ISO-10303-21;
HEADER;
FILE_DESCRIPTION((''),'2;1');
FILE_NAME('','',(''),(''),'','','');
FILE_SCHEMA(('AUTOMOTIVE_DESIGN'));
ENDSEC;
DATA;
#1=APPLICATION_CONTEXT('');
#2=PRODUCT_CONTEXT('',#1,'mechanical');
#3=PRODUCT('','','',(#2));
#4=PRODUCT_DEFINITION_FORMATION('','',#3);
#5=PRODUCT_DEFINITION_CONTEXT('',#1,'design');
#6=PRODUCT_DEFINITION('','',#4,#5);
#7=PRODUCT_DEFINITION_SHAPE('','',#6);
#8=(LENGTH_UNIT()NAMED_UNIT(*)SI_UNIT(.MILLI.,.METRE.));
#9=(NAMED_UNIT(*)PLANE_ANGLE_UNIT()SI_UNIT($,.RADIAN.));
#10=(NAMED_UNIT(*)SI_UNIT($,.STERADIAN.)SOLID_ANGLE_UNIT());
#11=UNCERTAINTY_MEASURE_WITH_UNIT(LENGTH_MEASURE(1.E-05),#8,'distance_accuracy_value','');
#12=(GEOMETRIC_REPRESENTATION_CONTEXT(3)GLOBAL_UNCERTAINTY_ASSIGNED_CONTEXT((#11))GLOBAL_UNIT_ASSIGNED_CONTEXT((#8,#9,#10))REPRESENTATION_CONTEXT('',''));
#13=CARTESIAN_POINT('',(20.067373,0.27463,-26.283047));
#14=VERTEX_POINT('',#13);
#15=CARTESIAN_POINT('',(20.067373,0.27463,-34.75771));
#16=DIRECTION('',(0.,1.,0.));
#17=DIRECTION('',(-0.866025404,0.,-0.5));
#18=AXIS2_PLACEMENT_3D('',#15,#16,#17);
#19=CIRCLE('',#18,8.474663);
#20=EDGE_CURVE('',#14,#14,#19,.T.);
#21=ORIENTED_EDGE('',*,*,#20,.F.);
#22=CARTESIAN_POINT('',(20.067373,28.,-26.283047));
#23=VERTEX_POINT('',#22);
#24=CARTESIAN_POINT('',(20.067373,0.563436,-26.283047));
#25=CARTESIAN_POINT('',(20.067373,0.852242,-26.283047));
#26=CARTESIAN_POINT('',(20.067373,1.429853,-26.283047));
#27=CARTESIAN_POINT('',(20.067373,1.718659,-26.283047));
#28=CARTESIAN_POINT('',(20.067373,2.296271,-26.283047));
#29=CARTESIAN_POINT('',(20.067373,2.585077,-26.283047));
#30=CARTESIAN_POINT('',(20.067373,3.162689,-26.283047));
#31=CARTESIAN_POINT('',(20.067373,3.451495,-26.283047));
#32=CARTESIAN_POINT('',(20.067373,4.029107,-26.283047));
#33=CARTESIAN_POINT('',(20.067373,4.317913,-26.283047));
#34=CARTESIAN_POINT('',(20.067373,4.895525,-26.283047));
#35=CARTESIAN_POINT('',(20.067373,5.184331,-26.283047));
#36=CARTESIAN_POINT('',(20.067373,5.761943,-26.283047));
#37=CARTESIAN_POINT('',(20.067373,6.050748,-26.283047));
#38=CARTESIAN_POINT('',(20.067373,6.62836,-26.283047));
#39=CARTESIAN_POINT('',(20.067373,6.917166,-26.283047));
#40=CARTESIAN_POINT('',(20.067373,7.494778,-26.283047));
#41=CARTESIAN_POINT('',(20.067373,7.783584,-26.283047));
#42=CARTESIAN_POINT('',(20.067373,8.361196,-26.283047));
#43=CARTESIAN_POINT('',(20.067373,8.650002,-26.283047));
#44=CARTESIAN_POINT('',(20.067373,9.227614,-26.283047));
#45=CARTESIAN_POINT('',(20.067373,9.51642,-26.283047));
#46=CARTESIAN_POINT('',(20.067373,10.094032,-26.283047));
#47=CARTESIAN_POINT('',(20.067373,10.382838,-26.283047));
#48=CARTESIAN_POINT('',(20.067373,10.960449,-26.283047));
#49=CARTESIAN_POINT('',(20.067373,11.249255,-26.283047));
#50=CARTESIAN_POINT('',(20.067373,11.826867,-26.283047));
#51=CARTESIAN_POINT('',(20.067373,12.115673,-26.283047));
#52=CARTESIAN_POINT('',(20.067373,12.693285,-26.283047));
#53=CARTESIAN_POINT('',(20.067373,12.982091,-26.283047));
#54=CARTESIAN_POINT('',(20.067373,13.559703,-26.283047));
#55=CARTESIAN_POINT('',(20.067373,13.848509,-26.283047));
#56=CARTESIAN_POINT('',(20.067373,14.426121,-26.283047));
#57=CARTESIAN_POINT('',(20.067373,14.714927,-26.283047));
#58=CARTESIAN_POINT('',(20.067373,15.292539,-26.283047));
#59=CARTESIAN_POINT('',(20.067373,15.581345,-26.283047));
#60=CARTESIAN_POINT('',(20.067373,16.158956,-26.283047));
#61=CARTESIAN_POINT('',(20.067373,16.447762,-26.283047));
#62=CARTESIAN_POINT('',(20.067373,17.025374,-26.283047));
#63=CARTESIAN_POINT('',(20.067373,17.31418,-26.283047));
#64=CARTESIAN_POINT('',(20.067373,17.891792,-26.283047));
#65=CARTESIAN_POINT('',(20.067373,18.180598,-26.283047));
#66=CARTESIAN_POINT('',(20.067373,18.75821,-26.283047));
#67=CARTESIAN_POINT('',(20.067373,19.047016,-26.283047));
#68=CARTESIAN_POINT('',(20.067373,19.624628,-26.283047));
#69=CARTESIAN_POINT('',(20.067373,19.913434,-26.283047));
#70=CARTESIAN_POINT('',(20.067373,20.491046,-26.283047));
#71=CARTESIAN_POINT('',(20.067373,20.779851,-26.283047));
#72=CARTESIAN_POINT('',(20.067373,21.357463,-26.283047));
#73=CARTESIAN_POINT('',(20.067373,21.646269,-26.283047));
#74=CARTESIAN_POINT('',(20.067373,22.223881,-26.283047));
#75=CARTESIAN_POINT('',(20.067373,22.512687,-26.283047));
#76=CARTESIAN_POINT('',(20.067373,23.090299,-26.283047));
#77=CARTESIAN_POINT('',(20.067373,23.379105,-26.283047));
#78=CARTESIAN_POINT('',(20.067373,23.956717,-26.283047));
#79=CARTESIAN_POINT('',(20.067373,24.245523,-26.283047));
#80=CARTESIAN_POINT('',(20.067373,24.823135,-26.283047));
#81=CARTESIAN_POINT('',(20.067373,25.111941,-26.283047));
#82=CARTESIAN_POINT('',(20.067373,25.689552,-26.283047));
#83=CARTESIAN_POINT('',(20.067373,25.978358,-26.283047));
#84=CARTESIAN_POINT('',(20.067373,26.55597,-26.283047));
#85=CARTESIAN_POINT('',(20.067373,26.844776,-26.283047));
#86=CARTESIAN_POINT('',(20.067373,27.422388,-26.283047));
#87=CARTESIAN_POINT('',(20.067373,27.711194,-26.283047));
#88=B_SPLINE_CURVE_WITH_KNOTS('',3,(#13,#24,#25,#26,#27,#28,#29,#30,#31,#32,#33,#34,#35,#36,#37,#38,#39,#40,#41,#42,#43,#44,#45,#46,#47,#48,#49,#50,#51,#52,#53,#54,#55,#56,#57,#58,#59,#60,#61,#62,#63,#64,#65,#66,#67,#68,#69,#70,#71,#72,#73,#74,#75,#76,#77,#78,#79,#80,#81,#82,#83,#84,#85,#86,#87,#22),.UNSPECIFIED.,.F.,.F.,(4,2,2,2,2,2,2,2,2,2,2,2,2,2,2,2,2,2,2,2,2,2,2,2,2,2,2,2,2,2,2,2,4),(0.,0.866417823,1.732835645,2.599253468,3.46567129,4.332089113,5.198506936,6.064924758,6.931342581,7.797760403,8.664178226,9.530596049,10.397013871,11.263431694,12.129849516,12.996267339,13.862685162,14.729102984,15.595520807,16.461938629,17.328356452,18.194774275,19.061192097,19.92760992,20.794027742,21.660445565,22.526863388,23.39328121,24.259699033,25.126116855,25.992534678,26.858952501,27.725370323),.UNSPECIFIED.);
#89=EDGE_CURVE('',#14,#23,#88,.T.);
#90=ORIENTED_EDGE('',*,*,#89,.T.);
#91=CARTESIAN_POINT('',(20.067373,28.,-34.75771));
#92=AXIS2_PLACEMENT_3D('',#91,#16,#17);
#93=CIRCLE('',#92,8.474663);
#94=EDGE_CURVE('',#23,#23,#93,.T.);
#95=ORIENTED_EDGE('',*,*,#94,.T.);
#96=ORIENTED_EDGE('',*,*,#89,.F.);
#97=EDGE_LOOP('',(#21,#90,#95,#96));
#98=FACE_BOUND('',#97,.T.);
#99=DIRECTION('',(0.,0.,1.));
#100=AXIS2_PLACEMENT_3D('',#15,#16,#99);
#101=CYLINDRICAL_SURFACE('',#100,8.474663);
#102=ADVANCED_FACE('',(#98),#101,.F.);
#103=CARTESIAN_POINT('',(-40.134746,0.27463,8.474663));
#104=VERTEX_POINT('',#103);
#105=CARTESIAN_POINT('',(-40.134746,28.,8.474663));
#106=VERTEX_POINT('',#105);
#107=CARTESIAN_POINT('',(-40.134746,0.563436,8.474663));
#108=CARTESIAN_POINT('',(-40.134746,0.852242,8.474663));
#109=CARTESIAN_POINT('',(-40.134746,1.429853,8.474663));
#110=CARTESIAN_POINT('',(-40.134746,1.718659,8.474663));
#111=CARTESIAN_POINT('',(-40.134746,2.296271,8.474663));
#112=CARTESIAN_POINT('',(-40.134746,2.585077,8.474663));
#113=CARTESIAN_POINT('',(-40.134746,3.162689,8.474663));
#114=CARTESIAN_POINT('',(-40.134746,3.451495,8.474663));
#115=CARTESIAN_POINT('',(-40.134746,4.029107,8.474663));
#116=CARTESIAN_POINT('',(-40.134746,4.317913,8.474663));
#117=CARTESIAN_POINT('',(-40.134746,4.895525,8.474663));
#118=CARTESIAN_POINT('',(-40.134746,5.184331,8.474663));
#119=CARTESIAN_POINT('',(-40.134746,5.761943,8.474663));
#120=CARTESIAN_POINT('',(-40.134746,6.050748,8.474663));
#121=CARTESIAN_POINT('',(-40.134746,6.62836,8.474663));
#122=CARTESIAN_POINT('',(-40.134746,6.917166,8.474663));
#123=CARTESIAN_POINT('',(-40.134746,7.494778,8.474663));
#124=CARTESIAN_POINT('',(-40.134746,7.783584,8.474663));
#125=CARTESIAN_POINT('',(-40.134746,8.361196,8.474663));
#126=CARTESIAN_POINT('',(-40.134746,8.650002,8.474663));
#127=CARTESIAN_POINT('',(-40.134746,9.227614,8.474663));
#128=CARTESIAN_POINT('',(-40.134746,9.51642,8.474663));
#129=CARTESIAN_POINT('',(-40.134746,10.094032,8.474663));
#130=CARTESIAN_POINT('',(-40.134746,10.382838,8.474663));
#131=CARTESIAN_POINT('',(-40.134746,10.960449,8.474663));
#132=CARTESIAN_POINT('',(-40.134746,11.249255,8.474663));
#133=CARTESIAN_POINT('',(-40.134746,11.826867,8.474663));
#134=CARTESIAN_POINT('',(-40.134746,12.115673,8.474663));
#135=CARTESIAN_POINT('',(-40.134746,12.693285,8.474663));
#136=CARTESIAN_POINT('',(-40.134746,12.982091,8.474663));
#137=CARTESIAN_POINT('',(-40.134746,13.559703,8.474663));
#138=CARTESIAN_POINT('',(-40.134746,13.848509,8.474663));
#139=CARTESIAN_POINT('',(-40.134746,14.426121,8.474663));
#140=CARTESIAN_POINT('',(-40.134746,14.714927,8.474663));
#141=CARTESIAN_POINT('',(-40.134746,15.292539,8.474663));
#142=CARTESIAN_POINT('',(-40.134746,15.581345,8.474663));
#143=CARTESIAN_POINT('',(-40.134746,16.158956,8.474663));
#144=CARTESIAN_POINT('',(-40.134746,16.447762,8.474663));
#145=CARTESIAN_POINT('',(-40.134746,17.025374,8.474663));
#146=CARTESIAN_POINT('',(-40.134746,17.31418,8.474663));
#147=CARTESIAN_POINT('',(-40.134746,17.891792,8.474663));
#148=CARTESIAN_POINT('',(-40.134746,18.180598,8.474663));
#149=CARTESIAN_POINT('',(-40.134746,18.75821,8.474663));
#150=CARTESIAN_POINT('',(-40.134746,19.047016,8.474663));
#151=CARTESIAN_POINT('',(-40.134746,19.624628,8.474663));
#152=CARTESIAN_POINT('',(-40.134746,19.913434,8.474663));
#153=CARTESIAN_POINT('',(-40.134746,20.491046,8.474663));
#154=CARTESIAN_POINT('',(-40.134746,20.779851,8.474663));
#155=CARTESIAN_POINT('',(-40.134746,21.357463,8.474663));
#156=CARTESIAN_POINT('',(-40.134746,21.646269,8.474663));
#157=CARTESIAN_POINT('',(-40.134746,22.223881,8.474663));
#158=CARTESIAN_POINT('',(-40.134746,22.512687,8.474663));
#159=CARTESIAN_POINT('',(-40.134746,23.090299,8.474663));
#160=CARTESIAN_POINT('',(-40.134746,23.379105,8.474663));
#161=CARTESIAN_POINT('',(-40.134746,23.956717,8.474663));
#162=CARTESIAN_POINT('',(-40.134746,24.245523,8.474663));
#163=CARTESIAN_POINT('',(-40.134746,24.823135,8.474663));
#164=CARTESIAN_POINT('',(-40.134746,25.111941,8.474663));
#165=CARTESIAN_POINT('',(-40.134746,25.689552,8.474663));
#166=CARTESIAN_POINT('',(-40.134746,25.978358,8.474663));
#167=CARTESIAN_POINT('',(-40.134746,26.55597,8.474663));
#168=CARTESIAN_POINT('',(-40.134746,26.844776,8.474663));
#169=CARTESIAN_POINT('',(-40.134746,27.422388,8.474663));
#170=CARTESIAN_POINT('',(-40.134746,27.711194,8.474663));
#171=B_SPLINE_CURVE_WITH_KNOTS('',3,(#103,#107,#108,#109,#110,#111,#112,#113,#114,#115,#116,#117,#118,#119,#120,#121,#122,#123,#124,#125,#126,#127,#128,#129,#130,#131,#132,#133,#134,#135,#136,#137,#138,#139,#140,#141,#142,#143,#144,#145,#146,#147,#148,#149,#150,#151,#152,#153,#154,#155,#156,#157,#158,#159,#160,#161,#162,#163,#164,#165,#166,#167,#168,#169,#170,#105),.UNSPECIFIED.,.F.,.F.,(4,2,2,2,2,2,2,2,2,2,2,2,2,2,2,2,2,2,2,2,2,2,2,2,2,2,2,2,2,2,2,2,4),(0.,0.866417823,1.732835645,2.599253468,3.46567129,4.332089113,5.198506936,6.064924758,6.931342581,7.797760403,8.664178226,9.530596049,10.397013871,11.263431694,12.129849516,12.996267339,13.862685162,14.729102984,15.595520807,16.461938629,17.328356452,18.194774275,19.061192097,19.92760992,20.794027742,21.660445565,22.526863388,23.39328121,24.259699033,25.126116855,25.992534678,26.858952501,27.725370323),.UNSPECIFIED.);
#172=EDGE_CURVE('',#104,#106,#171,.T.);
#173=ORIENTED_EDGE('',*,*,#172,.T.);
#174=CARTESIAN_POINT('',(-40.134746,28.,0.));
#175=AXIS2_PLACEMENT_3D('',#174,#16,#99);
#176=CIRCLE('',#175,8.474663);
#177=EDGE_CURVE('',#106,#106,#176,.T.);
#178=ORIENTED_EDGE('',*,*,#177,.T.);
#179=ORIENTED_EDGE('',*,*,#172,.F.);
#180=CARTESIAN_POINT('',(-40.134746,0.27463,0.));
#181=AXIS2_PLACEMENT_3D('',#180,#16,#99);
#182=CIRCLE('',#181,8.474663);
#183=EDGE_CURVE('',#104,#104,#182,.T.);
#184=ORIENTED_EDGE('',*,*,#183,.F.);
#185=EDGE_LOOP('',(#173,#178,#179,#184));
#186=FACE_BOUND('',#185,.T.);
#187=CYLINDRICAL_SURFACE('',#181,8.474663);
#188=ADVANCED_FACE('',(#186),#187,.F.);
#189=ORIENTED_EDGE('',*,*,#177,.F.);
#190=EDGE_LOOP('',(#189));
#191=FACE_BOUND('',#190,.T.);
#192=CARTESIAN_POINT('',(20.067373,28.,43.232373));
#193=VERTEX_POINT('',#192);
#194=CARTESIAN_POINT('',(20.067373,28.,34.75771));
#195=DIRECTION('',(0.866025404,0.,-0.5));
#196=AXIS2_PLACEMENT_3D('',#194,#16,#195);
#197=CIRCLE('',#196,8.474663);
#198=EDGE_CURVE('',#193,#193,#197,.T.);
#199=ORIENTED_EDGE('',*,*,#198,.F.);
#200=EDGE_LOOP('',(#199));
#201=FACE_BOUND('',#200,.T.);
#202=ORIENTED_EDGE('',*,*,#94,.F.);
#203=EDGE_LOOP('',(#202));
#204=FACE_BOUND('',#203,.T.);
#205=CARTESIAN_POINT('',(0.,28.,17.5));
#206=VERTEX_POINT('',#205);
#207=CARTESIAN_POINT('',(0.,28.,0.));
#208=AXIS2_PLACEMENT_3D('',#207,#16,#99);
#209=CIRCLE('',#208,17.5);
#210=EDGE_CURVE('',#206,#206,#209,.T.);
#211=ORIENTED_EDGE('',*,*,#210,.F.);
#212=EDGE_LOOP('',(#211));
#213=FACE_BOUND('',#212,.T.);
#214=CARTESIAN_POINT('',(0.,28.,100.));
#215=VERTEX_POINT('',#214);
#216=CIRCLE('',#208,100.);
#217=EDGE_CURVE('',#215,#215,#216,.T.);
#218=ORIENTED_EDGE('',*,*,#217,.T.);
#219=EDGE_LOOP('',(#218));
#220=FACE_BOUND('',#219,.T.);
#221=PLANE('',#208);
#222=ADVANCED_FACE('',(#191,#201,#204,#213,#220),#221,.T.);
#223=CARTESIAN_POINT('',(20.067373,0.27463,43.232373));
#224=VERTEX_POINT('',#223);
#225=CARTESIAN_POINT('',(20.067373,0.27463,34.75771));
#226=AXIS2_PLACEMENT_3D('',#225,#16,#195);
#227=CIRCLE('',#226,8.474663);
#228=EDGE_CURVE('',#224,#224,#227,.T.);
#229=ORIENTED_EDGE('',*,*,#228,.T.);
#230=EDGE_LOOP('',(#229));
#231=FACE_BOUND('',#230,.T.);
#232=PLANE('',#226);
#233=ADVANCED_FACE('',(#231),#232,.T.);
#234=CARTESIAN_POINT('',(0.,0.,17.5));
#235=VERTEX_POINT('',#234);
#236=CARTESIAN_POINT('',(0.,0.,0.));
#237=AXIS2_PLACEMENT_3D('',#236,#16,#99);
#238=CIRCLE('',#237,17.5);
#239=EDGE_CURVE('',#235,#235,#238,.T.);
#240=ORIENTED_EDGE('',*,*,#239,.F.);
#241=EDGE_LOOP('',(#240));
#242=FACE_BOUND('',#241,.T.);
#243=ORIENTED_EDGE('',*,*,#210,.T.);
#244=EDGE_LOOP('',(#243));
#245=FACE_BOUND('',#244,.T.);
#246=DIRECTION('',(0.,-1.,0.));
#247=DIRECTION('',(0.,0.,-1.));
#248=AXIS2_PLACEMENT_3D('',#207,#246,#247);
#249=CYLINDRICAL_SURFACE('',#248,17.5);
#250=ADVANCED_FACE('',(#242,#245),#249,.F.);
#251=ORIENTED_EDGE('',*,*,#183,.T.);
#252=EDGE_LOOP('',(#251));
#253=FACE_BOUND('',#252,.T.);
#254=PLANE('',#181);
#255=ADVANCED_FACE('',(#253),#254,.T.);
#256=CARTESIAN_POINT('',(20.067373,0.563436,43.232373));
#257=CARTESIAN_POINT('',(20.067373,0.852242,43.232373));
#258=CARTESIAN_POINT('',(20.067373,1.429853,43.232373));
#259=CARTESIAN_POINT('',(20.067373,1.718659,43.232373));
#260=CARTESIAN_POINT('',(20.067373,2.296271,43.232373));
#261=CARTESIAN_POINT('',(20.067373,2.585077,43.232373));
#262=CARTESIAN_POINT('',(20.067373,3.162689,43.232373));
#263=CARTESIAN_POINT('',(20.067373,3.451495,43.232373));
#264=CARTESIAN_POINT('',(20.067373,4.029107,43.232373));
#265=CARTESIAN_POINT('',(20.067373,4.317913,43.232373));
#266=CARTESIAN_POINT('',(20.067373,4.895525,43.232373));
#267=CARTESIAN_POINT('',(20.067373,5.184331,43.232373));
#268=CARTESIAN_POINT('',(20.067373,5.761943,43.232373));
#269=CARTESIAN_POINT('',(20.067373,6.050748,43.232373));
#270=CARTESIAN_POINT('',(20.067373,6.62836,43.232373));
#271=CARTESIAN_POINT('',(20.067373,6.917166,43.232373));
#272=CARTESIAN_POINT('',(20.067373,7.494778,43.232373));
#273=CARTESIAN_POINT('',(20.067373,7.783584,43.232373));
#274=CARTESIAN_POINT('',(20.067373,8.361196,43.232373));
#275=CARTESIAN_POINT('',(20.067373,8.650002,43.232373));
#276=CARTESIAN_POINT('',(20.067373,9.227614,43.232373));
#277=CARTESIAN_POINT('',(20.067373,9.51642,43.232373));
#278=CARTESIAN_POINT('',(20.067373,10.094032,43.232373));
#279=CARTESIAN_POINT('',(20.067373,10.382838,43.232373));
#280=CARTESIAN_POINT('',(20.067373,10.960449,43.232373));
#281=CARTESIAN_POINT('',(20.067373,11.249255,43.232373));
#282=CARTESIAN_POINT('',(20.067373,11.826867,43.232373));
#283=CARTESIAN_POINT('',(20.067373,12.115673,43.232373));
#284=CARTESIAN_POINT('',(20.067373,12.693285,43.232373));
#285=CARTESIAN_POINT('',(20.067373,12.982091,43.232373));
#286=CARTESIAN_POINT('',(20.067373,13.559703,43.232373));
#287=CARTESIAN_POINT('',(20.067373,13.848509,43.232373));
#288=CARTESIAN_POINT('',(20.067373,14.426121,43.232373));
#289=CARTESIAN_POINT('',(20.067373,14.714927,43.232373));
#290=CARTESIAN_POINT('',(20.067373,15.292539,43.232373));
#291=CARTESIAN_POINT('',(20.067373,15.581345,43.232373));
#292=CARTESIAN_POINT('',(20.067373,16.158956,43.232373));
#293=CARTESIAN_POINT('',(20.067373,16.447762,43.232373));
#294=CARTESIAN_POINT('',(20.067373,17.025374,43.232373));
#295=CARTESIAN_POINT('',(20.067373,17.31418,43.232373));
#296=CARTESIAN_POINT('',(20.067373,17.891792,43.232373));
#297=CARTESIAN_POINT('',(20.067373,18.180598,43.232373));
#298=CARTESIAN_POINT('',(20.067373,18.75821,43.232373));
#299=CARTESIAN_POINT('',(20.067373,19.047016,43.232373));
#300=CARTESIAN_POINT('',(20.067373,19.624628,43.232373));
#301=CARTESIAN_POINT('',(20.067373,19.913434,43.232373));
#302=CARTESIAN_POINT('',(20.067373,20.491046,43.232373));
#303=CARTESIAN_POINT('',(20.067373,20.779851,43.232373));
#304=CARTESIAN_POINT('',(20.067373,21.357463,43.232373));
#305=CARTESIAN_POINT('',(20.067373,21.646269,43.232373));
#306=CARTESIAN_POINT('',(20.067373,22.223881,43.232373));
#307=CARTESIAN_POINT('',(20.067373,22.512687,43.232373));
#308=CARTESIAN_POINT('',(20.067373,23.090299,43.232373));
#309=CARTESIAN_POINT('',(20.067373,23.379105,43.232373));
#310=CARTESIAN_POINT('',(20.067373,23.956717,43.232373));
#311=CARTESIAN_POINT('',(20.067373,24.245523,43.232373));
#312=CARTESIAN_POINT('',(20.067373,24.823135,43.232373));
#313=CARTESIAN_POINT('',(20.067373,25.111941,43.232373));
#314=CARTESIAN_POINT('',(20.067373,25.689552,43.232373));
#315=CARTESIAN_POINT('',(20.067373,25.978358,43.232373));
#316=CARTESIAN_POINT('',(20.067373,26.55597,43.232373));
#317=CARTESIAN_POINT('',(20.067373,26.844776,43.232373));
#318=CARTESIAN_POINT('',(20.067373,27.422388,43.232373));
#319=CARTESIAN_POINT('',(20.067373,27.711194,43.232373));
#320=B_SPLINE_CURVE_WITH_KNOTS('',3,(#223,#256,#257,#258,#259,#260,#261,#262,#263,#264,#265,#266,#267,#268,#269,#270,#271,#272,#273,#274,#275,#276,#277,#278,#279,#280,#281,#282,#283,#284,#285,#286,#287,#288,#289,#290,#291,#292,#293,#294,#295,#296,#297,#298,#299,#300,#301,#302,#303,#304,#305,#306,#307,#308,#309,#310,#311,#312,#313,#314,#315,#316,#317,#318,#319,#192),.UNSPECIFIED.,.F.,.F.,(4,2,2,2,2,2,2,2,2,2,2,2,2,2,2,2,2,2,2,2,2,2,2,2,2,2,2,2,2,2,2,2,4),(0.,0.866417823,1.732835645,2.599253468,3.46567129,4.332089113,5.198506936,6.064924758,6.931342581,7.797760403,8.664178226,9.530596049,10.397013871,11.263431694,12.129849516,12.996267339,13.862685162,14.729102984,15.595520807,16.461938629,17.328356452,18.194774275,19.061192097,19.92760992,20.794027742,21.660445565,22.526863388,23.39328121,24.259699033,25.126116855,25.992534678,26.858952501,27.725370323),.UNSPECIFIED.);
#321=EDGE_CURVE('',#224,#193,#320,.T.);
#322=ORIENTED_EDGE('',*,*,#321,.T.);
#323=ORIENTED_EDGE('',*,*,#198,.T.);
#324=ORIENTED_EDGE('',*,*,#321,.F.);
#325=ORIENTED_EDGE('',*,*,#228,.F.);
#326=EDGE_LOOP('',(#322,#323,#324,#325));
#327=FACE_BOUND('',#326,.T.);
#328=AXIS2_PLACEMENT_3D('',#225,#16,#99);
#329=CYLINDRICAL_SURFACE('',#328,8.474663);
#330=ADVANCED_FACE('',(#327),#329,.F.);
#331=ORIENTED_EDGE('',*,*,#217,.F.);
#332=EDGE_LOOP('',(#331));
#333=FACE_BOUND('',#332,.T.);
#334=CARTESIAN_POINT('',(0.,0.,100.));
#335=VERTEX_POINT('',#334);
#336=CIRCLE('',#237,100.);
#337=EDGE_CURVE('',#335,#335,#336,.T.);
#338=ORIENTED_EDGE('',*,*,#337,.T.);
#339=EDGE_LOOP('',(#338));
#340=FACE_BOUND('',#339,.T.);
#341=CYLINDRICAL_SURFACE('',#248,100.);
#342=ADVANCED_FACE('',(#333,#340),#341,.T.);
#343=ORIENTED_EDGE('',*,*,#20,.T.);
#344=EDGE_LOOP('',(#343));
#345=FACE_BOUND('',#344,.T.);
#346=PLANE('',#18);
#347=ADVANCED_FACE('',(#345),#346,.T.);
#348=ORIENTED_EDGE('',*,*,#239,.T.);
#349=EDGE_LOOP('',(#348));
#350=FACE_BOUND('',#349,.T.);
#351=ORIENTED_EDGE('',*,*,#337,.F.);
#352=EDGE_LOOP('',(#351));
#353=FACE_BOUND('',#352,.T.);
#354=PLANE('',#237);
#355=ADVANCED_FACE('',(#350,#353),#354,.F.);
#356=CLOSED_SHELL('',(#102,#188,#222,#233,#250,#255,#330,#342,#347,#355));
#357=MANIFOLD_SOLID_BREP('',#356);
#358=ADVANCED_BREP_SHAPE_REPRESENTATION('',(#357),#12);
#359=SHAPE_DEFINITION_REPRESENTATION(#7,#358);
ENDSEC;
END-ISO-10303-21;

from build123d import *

# Parameters (mm, degrees)
SKETCH1_R           = 100
BOSS_EXTRUDE1_DEPTH = 28
SKETCH2_R           = 17.5
CUT_EXTRUDE1_DEPTH  = 145.166570328
SKETCH3_R           = 8.474663197
CUT_EXTRUDE2_DEPTH  = 27.725370323
CIRPATTERN1_COUNT   = 3


with BuildPart() as part:
    # Sketch1 → Boss-Extrude1 (new body)
    with BuildSketch(Plane(origin=(0, 0, 0), x_dir=(1, 0, 0), z_dir=(0, 1, 0))):
        Circle(SKETCH1_R)
    extrude(amount=BOSS_EXTRUDE1_DEPTH)

    # Sketch2 → Cut-Extrude1 (cut, through all)
    with BuildSketch(Plane(origin=(0, 0, 0), x_dir=(1, 0, 0), z_dir=(0, 1, 0))):
        Circle(SKETCH2_R)
    extrude(amount=CUT_EXTRUDE1_DEPTH, mode=Mode.SUBTRACT)

    # Sketch3 → Cut-Extrude2 (cut)
    with BuildSketch(Plane(origin=(0, 28, 0), x_dir=(1, 0, 0), z_dir=(0, 1, 0))):
        with Locations((-40.134746181, 0)):
            Circle(SKETCH3_R)
    cut_extrude2 = extrude(amount=-CUT_EXTRUDE2_DEPTH, mode=Mode.SUBTRACT)

    # CirPattern1: Cut-Extrude2 ×3 about axis
    cirpattern1_axis = Axis((0, 0, 0), (0, 1, 0))
    for i in range(1, CIRPATTERN1_COUNT):
        add(cut_extrude2.rotate(cirpattern1_axis, i * 360 / CIRPATTERN1_COUNT), mode=Mode.SUBTRACT)


solid = part.part
